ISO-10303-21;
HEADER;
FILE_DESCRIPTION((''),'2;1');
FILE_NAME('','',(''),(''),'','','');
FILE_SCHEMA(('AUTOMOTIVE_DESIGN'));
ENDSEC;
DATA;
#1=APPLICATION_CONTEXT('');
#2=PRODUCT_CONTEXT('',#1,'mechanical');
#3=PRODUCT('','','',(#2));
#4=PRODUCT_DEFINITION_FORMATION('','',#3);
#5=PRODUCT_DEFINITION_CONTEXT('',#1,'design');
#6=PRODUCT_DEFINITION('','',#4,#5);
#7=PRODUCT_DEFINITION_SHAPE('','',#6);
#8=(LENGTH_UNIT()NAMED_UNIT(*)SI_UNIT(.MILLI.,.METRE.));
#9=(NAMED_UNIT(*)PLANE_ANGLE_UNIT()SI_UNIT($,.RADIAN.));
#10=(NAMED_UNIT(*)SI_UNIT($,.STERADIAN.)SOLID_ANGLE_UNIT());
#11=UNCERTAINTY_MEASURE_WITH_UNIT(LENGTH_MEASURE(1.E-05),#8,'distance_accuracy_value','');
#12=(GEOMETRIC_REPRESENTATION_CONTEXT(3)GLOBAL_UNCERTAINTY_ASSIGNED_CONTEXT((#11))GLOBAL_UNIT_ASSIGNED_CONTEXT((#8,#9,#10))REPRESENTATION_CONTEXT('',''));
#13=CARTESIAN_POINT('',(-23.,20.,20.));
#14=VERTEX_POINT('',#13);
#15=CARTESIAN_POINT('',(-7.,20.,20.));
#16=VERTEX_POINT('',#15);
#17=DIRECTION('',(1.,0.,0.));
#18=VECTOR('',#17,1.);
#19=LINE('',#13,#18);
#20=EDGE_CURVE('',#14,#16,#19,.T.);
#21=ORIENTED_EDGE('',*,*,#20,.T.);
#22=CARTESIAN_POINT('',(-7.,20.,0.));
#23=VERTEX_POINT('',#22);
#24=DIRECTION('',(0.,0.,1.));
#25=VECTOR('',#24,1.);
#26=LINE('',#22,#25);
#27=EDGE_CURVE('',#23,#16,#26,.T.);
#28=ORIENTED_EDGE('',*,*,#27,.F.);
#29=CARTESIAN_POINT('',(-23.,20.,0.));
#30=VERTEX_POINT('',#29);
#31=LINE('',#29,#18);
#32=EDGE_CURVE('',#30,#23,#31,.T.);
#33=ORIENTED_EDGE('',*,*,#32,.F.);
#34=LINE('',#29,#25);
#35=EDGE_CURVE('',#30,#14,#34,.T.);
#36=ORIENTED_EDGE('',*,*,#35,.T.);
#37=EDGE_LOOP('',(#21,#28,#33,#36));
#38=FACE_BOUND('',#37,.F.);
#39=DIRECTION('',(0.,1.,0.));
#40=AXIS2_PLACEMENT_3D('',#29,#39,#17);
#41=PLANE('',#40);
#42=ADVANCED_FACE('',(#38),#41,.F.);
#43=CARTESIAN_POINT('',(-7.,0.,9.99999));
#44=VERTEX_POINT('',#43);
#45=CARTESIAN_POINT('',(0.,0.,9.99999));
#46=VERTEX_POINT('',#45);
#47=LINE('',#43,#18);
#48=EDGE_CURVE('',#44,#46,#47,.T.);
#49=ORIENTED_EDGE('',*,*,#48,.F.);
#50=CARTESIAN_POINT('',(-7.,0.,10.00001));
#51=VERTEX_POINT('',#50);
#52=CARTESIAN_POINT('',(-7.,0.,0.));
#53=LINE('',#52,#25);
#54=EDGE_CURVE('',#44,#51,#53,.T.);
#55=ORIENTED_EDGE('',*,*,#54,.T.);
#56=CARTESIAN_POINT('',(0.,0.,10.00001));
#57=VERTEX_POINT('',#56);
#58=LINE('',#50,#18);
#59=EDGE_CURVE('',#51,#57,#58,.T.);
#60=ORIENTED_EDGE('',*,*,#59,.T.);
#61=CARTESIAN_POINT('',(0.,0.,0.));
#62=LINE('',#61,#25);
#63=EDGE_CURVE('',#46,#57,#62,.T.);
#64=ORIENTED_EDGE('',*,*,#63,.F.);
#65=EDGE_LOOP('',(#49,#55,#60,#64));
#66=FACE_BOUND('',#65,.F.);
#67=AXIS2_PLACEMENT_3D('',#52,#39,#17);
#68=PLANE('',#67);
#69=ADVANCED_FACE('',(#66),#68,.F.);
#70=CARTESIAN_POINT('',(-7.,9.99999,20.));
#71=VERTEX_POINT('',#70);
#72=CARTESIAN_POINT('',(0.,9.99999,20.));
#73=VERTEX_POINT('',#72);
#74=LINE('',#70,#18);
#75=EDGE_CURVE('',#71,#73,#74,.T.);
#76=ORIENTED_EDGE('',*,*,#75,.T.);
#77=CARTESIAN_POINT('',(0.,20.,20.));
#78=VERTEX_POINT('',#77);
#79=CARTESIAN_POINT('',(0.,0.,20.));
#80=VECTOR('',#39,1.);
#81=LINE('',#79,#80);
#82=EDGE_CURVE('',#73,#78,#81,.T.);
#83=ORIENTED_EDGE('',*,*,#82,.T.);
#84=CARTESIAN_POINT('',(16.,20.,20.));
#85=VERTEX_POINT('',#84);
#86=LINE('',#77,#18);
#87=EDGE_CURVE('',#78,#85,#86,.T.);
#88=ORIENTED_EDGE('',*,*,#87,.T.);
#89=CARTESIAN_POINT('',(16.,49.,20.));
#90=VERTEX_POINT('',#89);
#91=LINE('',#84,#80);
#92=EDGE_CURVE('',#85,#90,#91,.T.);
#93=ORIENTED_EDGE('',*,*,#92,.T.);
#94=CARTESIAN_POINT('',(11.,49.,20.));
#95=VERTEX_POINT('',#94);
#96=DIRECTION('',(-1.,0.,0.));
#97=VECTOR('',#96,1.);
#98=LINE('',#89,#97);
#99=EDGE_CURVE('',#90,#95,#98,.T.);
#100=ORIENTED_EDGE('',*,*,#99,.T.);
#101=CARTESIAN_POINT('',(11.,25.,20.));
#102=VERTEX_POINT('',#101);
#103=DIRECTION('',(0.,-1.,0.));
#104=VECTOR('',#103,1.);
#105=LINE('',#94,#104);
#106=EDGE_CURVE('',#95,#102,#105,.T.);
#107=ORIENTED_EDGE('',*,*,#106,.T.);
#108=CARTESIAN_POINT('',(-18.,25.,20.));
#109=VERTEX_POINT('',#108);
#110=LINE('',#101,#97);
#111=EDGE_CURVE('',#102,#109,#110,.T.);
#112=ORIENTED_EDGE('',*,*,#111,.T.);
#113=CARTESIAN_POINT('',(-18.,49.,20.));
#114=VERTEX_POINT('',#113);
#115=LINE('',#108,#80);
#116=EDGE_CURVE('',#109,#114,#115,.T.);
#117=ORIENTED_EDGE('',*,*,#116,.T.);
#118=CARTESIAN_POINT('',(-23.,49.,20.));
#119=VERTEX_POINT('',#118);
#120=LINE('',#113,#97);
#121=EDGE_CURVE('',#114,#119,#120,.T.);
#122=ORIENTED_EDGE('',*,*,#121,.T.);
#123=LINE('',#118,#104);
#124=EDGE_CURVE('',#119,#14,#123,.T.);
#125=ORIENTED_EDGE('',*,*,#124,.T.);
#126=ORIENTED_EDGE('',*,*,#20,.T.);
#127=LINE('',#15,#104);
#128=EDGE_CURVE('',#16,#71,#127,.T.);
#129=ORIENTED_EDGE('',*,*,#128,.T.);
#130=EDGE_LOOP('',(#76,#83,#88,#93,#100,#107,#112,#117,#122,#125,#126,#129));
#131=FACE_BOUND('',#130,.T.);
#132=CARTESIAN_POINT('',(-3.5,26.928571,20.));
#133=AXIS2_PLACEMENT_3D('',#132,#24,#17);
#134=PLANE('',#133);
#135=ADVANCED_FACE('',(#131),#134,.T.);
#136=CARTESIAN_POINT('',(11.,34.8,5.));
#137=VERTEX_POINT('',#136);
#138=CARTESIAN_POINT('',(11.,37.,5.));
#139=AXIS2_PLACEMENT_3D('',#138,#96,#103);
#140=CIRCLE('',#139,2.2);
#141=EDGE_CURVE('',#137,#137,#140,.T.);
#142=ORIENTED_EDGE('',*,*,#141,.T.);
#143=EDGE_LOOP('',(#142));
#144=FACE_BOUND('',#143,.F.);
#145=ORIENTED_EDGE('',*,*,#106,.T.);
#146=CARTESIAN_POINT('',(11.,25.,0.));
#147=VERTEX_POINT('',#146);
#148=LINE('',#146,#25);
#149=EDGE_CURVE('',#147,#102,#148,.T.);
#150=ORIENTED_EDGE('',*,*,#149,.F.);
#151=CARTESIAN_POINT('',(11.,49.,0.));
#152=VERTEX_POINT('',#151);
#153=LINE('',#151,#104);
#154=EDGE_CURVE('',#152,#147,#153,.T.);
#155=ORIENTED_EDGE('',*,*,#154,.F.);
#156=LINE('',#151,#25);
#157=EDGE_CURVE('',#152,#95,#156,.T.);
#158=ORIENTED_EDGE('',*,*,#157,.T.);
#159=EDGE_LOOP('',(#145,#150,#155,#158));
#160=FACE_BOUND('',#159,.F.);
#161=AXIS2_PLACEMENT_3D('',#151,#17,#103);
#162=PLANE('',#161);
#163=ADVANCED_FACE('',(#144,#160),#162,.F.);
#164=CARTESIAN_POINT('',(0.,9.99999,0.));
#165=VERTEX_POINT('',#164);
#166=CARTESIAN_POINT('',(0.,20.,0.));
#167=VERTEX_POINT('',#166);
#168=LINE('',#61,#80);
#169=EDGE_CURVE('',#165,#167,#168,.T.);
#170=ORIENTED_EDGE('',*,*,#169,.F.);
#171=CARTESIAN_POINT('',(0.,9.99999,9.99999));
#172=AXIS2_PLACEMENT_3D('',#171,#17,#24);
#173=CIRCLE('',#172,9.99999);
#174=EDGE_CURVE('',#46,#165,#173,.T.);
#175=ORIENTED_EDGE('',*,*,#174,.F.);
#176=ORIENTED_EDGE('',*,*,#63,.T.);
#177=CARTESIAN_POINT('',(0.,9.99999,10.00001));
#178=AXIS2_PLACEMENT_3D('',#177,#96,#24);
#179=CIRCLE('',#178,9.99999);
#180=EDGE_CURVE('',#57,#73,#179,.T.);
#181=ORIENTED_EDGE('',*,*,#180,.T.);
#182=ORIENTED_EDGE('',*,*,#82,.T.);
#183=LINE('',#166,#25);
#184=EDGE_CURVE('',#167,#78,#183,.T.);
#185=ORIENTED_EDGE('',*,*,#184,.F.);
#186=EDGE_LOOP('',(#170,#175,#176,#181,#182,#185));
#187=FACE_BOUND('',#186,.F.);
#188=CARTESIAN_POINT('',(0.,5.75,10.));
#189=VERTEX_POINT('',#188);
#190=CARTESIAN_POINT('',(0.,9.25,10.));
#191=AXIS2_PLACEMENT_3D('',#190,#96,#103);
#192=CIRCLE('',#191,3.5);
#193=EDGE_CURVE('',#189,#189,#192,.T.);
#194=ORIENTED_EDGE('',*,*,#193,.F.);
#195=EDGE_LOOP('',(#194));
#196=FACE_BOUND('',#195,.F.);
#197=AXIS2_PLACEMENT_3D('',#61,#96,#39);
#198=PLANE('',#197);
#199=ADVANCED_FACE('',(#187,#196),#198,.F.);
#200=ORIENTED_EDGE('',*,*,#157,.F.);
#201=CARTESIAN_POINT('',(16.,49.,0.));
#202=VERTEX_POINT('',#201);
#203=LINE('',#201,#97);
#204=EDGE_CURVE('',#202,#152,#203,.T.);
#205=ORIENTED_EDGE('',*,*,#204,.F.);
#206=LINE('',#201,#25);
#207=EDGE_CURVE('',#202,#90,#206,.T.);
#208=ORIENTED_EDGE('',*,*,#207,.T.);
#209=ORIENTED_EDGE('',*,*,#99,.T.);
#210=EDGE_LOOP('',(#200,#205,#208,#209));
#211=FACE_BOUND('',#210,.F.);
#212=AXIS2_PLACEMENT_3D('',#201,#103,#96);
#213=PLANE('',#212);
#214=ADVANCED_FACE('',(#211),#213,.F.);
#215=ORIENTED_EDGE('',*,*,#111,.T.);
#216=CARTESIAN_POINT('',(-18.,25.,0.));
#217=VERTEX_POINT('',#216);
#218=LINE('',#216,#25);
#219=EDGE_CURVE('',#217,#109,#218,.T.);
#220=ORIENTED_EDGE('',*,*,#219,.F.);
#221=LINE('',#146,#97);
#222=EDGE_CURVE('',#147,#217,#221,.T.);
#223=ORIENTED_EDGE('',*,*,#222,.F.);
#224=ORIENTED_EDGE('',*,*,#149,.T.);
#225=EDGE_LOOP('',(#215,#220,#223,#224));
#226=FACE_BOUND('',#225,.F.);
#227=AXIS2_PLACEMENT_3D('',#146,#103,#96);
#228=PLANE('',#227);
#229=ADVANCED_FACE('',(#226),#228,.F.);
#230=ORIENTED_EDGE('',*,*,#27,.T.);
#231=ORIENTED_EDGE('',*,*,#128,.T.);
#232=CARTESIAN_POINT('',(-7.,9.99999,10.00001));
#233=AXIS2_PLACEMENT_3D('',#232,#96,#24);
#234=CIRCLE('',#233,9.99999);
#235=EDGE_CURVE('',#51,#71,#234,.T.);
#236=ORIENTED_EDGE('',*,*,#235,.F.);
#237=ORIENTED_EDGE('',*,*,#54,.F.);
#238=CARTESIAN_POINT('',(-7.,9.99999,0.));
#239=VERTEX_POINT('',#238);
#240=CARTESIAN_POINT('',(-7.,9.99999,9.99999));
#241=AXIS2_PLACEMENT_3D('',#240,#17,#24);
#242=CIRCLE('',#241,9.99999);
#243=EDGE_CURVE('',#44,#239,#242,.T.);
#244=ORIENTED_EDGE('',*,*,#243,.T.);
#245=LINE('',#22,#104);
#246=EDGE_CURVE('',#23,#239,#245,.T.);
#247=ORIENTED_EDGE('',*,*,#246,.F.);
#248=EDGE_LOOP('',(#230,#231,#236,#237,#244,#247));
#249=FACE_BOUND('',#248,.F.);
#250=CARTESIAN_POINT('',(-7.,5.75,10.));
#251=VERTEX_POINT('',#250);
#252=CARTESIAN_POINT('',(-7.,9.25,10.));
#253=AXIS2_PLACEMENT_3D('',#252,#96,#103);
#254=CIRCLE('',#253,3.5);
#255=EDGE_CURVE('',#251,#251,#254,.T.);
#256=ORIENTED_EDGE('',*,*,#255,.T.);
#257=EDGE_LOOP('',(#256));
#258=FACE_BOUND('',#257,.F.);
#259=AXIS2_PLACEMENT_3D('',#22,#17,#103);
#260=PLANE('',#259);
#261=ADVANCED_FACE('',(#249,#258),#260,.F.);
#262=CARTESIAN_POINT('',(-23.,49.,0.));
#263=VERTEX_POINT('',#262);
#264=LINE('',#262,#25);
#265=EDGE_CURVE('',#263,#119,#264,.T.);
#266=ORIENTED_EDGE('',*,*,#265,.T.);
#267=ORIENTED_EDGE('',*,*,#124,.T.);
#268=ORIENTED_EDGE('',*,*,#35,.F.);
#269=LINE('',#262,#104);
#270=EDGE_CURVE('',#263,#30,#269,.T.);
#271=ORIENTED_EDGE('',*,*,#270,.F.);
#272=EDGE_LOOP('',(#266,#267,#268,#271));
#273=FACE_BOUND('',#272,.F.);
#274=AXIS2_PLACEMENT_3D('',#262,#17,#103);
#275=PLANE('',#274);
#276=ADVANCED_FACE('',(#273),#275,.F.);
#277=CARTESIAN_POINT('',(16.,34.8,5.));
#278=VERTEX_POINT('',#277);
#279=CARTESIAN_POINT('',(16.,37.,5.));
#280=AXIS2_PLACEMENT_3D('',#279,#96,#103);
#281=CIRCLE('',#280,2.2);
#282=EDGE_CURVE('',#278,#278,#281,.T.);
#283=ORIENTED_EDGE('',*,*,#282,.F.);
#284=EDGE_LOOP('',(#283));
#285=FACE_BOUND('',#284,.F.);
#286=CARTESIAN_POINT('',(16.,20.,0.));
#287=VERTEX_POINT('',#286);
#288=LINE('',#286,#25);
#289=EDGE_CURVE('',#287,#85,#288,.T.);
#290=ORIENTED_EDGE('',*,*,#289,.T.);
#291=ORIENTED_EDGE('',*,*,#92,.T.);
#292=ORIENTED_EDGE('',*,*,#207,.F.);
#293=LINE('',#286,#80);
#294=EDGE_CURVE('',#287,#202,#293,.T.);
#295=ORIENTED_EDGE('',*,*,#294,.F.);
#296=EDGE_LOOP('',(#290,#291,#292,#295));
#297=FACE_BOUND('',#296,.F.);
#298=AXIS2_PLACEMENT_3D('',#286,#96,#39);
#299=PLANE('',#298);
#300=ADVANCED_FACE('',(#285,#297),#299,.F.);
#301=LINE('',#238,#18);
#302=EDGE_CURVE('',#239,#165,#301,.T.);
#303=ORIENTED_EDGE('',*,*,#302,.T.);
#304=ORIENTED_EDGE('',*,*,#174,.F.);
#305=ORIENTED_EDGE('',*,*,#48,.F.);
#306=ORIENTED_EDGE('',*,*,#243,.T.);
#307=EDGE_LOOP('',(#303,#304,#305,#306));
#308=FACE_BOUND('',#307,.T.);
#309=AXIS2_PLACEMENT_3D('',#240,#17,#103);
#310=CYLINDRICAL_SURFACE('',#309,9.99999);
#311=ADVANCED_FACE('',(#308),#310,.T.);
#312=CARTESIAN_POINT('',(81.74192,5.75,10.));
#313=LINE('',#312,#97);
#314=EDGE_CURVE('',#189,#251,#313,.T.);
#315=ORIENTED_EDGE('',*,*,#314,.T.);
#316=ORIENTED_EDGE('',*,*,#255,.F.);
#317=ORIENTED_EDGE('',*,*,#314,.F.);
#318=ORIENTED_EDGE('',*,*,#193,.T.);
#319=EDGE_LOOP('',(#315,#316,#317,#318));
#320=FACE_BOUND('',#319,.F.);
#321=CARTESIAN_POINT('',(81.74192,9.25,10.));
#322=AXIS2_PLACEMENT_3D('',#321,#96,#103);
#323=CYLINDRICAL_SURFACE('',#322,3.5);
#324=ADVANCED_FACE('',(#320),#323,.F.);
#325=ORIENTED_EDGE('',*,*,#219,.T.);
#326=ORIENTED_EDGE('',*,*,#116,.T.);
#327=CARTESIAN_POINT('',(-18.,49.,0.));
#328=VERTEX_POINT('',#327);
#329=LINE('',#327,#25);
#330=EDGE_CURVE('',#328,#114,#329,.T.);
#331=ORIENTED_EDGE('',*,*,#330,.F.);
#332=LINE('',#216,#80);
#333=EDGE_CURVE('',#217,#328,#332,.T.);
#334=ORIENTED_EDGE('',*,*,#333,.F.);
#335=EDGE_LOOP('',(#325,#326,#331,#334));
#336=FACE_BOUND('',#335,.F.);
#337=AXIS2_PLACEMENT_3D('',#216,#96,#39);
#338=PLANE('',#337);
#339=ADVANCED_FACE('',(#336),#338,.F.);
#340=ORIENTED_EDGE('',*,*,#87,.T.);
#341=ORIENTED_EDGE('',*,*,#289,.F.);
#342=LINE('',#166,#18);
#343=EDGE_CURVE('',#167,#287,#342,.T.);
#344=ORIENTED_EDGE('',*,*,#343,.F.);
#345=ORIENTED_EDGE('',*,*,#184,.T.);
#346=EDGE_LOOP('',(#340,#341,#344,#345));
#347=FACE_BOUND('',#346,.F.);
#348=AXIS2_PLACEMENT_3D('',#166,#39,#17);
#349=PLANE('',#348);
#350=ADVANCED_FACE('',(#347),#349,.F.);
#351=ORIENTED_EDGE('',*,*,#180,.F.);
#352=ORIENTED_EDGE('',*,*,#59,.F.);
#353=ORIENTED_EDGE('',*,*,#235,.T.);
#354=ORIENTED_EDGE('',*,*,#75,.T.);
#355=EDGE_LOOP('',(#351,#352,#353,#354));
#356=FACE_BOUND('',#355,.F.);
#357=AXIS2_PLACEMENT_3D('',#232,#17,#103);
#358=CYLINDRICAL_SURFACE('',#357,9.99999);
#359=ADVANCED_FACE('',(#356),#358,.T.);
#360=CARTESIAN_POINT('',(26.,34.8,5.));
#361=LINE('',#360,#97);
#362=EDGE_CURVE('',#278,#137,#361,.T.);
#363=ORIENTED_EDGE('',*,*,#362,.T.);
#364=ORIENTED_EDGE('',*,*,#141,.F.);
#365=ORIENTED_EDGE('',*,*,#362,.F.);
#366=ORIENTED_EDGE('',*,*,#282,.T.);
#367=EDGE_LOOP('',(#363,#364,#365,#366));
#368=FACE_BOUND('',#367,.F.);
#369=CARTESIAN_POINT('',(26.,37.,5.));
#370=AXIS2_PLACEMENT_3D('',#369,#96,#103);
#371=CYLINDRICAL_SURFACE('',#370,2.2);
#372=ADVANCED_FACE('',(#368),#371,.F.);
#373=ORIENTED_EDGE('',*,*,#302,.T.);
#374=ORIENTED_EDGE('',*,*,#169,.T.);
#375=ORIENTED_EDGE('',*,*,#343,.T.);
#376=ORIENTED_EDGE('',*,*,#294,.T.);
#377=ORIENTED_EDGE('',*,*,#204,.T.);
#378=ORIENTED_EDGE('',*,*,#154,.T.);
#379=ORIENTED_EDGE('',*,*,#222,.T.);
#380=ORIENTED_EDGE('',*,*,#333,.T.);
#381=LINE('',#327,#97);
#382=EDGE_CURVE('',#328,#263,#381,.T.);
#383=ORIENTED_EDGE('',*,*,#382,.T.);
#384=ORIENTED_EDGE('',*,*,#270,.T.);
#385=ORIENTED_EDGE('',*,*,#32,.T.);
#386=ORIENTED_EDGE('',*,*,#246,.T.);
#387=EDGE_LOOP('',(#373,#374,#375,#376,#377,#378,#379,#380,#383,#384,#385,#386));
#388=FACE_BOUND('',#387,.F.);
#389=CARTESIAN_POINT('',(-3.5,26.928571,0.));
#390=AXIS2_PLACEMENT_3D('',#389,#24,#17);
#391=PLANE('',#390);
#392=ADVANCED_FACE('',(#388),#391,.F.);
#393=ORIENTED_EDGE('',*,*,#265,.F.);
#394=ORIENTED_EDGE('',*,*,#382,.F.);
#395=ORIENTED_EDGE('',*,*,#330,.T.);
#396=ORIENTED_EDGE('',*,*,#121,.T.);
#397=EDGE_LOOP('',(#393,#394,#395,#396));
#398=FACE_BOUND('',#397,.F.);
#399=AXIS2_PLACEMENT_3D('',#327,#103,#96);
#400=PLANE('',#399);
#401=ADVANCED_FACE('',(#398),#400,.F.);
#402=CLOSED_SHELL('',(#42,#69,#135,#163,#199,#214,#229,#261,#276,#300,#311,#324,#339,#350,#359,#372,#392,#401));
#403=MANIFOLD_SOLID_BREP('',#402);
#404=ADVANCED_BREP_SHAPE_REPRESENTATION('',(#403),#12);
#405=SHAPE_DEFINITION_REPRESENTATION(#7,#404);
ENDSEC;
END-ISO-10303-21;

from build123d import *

# Parameters (mm, degrees)
F1_DEPTH = 20
F2_R     = 9.99999
F4_D     = 7
F5_D     = 4.4
F5_DEPTH = 10
F5_TIP   = 1.3218933619


# Not quite as in the source:
# - a fillet or chamfer is up to 0.001 mm smaller than in the source, because OpenCascade refuses the exact size


with BuildPart() as f1:
    # F0 (on Top) → F1 (new body)
    with BuildSketch(Plane.XY):
        Polygon((-18, 49), (-23, 49), (-23, 20), (-7, 20), (-7, 0), (0, 0), (0, 20), (16, 20), (16, 49), (11, 49), (11, 25), (-18, 25), align=None)
    extrude(amount=F1_DEPTH)

    # F2 (radius 10 in the source; OpenCascade refuses exactly that, so slightly less here)
    f2_edges = [f1.edges().sort_by_distance(p)[0] for p in [
        (-3.5, 0, 20),
        (-3.5, 0, 0),
    ]]
    fillet(f2_edges, radius=F2_R)

    # F4 (through all)
    with Locations(Plane.YZ.offset(16)):
        with Locations((9.25, 10)):
            Hole(F4_D / 2)

    # F5
    with Locations(Plane.YZ.offset(16)):
        with Locations((37, 5)):
            Hole(F5_D / 2, depth=F5_DEPTH)
            with Locations((0, 0, -(F5_DEPTH + F5_TIP / 2))):  # 118° drill point
                Cone(0, F5_D / 2, F5_TIP, mode=Mode.SUBTRACT)


solid = f1.part
